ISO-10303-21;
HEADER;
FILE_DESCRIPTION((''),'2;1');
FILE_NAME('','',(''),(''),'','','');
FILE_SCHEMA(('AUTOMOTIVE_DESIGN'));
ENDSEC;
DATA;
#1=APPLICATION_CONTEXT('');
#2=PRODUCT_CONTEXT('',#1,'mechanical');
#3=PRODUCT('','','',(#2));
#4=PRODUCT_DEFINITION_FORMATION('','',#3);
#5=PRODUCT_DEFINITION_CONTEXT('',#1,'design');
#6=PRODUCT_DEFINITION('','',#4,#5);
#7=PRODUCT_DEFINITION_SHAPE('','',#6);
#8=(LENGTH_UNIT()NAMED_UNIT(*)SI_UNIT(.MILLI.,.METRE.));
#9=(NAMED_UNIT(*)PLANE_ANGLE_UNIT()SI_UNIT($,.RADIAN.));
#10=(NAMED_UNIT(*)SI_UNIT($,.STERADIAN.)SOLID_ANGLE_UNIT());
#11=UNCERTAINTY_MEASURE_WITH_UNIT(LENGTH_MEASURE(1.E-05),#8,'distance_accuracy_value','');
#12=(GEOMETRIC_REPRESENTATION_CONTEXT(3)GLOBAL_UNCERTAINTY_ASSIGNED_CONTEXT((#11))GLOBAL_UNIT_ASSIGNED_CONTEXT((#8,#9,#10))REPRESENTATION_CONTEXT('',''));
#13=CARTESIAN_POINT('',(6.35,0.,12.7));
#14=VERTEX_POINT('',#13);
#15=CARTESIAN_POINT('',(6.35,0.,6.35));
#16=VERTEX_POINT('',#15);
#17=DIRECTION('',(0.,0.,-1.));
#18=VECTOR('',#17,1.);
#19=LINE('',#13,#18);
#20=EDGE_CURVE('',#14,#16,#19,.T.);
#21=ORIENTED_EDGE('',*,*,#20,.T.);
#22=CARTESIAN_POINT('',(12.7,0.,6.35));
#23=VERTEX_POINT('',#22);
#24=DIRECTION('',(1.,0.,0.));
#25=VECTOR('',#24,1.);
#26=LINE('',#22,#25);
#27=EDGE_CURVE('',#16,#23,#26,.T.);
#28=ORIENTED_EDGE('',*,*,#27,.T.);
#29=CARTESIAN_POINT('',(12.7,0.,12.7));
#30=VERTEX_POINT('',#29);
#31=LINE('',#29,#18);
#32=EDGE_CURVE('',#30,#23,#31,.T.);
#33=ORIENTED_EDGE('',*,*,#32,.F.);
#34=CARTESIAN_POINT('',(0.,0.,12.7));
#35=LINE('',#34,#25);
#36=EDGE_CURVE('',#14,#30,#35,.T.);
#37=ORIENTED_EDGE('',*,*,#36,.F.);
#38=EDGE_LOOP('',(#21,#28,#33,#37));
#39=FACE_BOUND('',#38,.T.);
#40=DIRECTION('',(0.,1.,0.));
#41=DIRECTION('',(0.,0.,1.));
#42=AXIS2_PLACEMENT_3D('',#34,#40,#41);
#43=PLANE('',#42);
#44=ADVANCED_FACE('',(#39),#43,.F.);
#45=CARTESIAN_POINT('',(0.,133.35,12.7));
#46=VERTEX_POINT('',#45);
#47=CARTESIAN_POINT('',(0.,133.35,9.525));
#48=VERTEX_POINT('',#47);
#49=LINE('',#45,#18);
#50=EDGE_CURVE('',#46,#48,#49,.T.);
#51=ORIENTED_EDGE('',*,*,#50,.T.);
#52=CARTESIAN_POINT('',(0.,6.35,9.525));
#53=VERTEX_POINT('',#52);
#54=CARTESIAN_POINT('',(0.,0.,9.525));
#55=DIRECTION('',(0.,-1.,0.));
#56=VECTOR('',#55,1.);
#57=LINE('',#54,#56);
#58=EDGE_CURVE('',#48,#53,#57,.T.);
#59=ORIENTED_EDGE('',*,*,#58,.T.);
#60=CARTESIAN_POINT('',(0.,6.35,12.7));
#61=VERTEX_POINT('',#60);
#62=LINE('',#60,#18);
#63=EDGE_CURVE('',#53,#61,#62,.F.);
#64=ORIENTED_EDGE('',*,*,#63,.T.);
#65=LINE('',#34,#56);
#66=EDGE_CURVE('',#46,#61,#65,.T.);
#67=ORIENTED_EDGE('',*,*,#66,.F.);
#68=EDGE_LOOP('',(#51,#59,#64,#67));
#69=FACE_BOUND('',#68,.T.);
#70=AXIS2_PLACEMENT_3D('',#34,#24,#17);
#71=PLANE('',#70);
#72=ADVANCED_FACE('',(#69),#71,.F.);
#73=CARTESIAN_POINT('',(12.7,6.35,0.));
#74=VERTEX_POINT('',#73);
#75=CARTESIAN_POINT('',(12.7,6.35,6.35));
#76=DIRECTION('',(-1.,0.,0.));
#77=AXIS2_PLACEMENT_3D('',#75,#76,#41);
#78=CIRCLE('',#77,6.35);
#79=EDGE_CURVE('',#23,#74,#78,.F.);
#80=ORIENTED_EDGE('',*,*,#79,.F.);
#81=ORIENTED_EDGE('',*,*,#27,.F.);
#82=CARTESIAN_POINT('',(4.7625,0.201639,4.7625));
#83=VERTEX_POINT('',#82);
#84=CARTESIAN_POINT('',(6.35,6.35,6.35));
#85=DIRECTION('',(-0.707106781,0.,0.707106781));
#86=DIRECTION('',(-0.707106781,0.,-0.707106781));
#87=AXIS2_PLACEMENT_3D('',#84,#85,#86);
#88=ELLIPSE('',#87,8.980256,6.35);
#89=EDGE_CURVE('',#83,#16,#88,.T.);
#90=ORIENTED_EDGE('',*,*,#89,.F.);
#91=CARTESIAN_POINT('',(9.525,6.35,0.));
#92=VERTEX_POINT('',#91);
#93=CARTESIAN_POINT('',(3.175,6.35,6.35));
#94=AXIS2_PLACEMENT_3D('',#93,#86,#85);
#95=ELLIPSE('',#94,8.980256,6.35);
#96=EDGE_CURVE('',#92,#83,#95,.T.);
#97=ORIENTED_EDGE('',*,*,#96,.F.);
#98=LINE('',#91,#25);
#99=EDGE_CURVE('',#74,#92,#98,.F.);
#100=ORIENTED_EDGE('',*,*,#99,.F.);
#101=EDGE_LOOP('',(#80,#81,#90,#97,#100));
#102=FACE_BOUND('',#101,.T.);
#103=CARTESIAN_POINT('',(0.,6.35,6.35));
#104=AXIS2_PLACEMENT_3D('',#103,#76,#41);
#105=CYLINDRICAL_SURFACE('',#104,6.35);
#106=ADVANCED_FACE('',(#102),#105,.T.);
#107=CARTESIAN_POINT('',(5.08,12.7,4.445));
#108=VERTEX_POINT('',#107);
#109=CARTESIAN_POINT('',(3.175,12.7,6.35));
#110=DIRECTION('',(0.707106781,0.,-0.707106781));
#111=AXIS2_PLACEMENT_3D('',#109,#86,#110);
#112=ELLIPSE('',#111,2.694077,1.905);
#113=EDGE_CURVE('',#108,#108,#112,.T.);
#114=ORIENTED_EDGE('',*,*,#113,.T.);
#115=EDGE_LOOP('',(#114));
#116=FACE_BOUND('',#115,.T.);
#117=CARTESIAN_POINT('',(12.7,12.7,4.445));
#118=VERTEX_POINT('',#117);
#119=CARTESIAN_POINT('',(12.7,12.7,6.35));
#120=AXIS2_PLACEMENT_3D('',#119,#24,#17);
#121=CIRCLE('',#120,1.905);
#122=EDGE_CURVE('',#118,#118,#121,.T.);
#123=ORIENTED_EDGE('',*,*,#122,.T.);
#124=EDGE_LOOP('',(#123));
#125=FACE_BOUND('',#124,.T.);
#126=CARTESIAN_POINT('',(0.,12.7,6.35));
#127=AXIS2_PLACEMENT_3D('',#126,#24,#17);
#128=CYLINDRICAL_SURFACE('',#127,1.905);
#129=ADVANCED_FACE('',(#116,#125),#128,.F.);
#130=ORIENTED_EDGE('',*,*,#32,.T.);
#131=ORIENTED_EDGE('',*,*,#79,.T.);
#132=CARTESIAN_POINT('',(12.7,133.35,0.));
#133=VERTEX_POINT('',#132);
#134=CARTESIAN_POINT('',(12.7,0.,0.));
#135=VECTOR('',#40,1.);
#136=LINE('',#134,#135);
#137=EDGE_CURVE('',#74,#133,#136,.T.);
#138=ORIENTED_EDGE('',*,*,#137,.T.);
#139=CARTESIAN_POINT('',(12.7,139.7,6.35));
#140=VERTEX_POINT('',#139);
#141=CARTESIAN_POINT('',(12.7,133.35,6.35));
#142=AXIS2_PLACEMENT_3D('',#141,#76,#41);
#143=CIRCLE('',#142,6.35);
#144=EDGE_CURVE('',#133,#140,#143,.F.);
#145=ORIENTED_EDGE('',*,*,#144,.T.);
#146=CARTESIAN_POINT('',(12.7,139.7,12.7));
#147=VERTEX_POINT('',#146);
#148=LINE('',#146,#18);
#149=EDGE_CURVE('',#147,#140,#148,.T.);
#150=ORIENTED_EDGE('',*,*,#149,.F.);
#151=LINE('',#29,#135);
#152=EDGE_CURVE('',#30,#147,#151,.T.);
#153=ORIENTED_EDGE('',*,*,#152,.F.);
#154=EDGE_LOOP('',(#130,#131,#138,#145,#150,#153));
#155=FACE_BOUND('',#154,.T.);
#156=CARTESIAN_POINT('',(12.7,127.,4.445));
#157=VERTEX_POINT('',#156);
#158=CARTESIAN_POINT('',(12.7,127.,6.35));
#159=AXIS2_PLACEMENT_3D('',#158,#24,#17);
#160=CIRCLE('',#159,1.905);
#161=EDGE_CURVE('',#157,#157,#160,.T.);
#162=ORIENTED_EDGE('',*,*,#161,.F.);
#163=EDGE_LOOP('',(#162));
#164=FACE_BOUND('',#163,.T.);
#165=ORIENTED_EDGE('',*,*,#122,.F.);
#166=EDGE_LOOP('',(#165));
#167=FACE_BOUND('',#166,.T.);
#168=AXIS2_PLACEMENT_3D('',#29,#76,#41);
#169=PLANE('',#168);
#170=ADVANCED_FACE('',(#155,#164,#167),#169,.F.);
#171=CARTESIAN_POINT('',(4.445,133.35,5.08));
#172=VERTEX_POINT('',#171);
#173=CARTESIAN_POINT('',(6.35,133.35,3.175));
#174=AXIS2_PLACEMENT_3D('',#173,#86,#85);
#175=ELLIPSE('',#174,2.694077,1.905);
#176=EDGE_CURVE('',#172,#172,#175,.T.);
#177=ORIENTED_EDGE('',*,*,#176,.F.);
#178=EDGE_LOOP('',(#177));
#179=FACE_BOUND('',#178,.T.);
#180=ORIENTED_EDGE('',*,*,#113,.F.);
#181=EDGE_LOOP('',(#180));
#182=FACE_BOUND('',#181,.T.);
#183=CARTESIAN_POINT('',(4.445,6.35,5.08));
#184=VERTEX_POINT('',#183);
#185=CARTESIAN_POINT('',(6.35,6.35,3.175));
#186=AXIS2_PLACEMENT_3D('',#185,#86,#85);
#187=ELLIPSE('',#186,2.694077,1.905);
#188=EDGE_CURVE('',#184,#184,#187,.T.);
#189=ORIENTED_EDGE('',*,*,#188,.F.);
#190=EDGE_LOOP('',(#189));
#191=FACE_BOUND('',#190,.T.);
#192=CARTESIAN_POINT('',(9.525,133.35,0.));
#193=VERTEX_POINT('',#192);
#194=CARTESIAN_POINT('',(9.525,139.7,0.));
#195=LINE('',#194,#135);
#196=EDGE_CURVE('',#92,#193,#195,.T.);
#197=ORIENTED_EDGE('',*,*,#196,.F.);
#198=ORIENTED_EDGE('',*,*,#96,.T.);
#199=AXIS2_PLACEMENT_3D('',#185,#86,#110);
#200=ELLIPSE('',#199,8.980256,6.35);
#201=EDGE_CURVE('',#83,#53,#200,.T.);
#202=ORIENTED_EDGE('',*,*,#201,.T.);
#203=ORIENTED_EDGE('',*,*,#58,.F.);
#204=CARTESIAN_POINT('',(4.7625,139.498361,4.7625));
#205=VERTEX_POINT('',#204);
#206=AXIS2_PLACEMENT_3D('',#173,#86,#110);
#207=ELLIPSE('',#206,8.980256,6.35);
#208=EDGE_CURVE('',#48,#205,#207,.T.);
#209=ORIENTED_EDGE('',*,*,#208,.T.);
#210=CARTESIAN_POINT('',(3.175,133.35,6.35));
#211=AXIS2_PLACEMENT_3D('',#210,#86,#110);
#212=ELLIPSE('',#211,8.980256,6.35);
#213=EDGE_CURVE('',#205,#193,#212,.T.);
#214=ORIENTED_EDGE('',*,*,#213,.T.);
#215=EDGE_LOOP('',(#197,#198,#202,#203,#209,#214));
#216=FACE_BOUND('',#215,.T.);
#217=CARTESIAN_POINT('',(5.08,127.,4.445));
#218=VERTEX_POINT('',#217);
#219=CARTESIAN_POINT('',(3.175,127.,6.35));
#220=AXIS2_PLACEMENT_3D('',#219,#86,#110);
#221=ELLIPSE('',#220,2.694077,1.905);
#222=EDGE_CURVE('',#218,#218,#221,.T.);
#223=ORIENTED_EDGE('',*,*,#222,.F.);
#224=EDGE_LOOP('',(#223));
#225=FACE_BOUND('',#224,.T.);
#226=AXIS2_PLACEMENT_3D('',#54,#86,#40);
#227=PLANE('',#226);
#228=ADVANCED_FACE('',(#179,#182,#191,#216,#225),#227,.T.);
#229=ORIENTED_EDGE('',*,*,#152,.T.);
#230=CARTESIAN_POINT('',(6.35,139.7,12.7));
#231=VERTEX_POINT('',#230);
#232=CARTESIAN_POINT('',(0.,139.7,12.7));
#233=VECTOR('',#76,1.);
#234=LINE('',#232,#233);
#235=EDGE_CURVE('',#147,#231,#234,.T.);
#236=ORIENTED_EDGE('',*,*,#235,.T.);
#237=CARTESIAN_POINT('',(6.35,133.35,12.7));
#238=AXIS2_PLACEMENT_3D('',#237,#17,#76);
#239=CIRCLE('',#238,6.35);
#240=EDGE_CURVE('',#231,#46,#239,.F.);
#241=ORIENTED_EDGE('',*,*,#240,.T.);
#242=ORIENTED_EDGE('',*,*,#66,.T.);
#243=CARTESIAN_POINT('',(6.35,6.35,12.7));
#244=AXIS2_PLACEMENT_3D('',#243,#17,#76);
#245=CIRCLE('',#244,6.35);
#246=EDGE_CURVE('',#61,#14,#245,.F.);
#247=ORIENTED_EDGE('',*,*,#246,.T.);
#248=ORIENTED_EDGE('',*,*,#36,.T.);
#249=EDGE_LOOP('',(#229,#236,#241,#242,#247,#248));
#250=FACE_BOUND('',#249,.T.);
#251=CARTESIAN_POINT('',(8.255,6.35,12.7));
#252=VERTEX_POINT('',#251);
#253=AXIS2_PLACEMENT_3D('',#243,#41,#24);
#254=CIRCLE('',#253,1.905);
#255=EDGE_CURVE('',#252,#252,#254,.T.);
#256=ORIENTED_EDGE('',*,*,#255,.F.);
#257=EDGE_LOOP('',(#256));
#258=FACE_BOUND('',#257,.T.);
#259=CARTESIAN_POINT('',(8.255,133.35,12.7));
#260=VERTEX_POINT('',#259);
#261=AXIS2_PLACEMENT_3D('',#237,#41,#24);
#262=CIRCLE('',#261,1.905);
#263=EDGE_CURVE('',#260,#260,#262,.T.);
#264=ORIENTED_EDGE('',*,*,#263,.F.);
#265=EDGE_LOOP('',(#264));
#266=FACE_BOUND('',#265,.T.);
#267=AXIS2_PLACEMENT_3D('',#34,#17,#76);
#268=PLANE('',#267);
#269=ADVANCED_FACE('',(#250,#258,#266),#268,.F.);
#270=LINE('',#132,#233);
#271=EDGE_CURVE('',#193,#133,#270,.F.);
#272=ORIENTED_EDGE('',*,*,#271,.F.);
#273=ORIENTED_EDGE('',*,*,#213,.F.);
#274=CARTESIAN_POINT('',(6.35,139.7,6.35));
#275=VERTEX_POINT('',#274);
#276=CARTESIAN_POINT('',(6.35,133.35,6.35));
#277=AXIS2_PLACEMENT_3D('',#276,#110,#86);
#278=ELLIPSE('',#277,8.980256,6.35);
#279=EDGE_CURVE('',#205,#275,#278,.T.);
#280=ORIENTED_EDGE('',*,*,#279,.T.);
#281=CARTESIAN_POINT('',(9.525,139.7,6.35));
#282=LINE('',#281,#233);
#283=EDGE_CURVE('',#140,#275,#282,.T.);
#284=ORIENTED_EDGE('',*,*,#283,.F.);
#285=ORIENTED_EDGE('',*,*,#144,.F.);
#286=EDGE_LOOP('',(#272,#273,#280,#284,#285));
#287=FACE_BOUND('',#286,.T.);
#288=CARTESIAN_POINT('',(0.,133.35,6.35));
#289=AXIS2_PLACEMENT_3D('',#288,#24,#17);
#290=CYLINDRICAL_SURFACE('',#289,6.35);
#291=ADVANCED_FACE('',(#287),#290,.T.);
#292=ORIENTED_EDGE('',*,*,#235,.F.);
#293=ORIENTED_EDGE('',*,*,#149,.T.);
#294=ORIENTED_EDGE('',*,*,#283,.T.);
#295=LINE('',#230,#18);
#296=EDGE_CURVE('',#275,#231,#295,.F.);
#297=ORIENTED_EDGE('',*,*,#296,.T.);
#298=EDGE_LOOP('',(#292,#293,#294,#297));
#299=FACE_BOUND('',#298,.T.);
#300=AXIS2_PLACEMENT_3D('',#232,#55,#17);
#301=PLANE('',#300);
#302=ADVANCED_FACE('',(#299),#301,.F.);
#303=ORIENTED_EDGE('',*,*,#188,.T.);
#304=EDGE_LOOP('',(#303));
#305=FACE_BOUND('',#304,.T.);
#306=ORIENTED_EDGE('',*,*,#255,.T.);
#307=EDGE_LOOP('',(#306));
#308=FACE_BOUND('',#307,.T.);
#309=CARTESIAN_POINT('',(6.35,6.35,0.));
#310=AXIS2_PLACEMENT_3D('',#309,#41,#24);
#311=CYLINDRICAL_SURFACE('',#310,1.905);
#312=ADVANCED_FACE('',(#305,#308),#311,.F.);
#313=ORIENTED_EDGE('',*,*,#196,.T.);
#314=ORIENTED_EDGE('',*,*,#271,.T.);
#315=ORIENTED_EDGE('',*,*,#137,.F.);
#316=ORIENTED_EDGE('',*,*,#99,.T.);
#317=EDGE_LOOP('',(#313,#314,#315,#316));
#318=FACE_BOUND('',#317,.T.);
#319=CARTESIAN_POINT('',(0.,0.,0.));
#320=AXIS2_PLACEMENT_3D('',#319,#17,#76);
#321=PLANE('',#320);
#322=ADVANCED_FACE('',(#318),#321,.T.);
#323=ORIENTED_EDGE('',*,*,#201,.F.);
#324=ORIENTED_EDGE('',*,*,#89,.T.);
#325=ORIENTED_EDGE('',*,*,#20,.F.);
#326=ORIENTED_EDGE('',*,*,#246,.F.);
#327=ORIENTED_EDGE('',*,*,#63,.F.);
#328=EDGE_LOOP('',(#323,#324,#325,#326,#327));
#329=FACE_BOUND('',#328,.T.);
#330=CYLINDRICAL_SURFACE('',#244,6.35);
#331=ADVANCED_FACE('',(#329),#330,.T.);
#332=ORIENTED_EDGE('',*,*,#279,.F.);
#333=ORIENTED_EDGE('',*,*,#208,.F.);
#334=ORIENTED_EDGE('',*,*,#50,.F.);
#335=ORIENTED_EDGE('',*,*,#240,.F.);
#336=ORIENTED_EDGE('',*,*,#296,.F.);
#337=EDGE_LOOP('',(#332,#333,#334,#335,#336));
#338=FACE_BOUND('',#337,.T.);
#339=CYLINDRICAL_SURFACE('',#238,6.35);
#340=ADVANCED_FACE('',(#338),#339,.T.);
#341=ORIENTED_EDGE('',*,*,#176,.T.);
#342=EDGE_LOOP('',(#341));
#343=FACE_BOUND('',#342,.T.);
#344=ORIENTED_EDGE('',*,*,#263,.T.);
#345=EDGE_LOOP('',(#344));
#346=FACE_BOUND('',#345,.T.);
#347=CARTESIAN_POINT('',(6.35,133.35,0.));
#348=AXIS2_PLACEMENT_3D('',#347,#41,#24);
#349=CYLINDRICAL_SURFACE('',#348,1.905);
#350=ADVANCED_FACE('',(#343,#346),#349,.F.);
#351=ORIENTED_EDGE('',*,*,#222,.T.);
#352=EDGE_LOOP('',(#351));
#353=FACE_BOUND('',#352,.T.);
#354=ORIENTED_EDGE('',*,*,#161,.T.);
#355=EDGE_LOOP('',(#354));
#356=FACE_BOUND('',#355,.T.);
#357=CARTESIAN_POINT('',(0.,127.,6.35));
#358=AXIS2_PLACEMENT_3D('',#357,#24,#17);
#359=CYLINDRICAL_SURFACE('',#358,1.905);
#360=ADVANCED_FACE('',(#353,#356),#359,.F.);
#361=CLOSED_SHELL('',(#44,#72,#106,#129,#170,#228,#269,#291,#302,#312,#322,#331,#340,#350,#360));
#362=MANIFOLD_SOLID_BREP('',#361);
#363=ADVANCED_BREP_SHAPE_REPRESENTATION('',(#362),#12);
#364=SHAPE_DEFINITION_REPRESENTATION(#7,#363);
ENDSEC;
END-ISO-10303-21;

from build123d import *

# Parameters (mm, degrees)
SKETCH1_W           = 12.7
SKETCH1_H           = 139.7
BOSS_EXTRUDE1_DEPTH = 12.7
CHAMFER1_SIZE       = 9.525
SKETCH2_R           = 1.905
CUT_EXTRUDE1_DEPTH  = 141.849813631
SKETCH3_R           = 1.905
CUT_EXTRUDE2_DEPTH  = 141.849813631
FILLET1_R           = 6.35


with BuildPart() as part:
    # Sketch1 → Boss-Extrude1 (new body)
    with BuildSketch(Plane.XY):
        with Locations((6.35, 69.85)):
            Rectangle(SKETCH1_W, SKETCH1_H)
    extrude(amount=BOSS_EXTRUDE1_DEPTH)

    # Chamfer1
    chamfer1_edges = [part.edges().sort_by_distance(p)[0] for p in [
        (0, 69.85, 0),
    ]]
    chamfer(chamfer1_edges, length=CHAMFER1_SIZE)

    # Sketch2 → Cut-Extrude1 (cut, through all)
    with BuildSketch(Plane.XY.offset(12.7)):
        with Locations((6.35, 133.35)):
            Circle(SKETCH2_R)
        with Locations((6.35, 6.35)):
            Circle(SKETCH2_R)
    extrude(amount=-CUT_EXTRUDE1_DEPTH, mode=Mode.SUBTRACT)

    # Sketch3 → Cut-Extrude2 (cut, through all)
    with BuildSketch(Plane(origin=(12.7, 0, 0), x_dir=(0, 0, -1), z_dir=(1, 0, 0))):
        with Locations((-6.35, 127)):
            Circle(SKETCH3_R)
        with Locations((-6.35, 12.7)):
            Circle(SKETCH3_R)
    extrude(amount=-CUT_EXTRUDE2_DEPTH, mode=Mode.SUBTRACT)

    # Fillet1
    # the kernel refuses this fillet: 6.35 mm, written as the material it takes off along each edge
    with BuildSketch(Plane(origin=(28.575, 139.7, 0), x_dir=(0, -1, 0), z_dir=(-1, 0, 0)), Plane(origin=(0, 139.7, -6.35), x_dir=(0, -1, 0), z_dir=(0, 0, 1)), Plane(origin=(0, 0, -6.35), x_dir=(1, 0, 0), z_dir=(0, 0, 1))) as fillet1_piece_1:
        with BuildLine():
            CenterArc((FILLET1_R, FILLET1_R), FILLET1_R, 180, 90)
            Line((0, FILLET1_R), (0, 0))
            Line((0, 0), (FILLET1_R, 0))
        make_face()
    extrude(amount=34.925, mode=Mode.SUBTRACT)
    with BuildSketch(Plane(origin=(-6.35, 0, 0), x_dir=(0, 0, 1), z_dir=(1, 0, 0))) as fillet1_piece_2:
        with BuildLine():
            CenterArc((FILLET1_R, -FILLET1_R), FILLET1_R, 90, 90)
            Line((0, -FILLET1_R), (0, 0))
            Line((0, 0), (FILLET1_R, 0))
        make_face()
    extrude(amount=34.925, mode=Mode.SUBTRACT)


solid = part.part
